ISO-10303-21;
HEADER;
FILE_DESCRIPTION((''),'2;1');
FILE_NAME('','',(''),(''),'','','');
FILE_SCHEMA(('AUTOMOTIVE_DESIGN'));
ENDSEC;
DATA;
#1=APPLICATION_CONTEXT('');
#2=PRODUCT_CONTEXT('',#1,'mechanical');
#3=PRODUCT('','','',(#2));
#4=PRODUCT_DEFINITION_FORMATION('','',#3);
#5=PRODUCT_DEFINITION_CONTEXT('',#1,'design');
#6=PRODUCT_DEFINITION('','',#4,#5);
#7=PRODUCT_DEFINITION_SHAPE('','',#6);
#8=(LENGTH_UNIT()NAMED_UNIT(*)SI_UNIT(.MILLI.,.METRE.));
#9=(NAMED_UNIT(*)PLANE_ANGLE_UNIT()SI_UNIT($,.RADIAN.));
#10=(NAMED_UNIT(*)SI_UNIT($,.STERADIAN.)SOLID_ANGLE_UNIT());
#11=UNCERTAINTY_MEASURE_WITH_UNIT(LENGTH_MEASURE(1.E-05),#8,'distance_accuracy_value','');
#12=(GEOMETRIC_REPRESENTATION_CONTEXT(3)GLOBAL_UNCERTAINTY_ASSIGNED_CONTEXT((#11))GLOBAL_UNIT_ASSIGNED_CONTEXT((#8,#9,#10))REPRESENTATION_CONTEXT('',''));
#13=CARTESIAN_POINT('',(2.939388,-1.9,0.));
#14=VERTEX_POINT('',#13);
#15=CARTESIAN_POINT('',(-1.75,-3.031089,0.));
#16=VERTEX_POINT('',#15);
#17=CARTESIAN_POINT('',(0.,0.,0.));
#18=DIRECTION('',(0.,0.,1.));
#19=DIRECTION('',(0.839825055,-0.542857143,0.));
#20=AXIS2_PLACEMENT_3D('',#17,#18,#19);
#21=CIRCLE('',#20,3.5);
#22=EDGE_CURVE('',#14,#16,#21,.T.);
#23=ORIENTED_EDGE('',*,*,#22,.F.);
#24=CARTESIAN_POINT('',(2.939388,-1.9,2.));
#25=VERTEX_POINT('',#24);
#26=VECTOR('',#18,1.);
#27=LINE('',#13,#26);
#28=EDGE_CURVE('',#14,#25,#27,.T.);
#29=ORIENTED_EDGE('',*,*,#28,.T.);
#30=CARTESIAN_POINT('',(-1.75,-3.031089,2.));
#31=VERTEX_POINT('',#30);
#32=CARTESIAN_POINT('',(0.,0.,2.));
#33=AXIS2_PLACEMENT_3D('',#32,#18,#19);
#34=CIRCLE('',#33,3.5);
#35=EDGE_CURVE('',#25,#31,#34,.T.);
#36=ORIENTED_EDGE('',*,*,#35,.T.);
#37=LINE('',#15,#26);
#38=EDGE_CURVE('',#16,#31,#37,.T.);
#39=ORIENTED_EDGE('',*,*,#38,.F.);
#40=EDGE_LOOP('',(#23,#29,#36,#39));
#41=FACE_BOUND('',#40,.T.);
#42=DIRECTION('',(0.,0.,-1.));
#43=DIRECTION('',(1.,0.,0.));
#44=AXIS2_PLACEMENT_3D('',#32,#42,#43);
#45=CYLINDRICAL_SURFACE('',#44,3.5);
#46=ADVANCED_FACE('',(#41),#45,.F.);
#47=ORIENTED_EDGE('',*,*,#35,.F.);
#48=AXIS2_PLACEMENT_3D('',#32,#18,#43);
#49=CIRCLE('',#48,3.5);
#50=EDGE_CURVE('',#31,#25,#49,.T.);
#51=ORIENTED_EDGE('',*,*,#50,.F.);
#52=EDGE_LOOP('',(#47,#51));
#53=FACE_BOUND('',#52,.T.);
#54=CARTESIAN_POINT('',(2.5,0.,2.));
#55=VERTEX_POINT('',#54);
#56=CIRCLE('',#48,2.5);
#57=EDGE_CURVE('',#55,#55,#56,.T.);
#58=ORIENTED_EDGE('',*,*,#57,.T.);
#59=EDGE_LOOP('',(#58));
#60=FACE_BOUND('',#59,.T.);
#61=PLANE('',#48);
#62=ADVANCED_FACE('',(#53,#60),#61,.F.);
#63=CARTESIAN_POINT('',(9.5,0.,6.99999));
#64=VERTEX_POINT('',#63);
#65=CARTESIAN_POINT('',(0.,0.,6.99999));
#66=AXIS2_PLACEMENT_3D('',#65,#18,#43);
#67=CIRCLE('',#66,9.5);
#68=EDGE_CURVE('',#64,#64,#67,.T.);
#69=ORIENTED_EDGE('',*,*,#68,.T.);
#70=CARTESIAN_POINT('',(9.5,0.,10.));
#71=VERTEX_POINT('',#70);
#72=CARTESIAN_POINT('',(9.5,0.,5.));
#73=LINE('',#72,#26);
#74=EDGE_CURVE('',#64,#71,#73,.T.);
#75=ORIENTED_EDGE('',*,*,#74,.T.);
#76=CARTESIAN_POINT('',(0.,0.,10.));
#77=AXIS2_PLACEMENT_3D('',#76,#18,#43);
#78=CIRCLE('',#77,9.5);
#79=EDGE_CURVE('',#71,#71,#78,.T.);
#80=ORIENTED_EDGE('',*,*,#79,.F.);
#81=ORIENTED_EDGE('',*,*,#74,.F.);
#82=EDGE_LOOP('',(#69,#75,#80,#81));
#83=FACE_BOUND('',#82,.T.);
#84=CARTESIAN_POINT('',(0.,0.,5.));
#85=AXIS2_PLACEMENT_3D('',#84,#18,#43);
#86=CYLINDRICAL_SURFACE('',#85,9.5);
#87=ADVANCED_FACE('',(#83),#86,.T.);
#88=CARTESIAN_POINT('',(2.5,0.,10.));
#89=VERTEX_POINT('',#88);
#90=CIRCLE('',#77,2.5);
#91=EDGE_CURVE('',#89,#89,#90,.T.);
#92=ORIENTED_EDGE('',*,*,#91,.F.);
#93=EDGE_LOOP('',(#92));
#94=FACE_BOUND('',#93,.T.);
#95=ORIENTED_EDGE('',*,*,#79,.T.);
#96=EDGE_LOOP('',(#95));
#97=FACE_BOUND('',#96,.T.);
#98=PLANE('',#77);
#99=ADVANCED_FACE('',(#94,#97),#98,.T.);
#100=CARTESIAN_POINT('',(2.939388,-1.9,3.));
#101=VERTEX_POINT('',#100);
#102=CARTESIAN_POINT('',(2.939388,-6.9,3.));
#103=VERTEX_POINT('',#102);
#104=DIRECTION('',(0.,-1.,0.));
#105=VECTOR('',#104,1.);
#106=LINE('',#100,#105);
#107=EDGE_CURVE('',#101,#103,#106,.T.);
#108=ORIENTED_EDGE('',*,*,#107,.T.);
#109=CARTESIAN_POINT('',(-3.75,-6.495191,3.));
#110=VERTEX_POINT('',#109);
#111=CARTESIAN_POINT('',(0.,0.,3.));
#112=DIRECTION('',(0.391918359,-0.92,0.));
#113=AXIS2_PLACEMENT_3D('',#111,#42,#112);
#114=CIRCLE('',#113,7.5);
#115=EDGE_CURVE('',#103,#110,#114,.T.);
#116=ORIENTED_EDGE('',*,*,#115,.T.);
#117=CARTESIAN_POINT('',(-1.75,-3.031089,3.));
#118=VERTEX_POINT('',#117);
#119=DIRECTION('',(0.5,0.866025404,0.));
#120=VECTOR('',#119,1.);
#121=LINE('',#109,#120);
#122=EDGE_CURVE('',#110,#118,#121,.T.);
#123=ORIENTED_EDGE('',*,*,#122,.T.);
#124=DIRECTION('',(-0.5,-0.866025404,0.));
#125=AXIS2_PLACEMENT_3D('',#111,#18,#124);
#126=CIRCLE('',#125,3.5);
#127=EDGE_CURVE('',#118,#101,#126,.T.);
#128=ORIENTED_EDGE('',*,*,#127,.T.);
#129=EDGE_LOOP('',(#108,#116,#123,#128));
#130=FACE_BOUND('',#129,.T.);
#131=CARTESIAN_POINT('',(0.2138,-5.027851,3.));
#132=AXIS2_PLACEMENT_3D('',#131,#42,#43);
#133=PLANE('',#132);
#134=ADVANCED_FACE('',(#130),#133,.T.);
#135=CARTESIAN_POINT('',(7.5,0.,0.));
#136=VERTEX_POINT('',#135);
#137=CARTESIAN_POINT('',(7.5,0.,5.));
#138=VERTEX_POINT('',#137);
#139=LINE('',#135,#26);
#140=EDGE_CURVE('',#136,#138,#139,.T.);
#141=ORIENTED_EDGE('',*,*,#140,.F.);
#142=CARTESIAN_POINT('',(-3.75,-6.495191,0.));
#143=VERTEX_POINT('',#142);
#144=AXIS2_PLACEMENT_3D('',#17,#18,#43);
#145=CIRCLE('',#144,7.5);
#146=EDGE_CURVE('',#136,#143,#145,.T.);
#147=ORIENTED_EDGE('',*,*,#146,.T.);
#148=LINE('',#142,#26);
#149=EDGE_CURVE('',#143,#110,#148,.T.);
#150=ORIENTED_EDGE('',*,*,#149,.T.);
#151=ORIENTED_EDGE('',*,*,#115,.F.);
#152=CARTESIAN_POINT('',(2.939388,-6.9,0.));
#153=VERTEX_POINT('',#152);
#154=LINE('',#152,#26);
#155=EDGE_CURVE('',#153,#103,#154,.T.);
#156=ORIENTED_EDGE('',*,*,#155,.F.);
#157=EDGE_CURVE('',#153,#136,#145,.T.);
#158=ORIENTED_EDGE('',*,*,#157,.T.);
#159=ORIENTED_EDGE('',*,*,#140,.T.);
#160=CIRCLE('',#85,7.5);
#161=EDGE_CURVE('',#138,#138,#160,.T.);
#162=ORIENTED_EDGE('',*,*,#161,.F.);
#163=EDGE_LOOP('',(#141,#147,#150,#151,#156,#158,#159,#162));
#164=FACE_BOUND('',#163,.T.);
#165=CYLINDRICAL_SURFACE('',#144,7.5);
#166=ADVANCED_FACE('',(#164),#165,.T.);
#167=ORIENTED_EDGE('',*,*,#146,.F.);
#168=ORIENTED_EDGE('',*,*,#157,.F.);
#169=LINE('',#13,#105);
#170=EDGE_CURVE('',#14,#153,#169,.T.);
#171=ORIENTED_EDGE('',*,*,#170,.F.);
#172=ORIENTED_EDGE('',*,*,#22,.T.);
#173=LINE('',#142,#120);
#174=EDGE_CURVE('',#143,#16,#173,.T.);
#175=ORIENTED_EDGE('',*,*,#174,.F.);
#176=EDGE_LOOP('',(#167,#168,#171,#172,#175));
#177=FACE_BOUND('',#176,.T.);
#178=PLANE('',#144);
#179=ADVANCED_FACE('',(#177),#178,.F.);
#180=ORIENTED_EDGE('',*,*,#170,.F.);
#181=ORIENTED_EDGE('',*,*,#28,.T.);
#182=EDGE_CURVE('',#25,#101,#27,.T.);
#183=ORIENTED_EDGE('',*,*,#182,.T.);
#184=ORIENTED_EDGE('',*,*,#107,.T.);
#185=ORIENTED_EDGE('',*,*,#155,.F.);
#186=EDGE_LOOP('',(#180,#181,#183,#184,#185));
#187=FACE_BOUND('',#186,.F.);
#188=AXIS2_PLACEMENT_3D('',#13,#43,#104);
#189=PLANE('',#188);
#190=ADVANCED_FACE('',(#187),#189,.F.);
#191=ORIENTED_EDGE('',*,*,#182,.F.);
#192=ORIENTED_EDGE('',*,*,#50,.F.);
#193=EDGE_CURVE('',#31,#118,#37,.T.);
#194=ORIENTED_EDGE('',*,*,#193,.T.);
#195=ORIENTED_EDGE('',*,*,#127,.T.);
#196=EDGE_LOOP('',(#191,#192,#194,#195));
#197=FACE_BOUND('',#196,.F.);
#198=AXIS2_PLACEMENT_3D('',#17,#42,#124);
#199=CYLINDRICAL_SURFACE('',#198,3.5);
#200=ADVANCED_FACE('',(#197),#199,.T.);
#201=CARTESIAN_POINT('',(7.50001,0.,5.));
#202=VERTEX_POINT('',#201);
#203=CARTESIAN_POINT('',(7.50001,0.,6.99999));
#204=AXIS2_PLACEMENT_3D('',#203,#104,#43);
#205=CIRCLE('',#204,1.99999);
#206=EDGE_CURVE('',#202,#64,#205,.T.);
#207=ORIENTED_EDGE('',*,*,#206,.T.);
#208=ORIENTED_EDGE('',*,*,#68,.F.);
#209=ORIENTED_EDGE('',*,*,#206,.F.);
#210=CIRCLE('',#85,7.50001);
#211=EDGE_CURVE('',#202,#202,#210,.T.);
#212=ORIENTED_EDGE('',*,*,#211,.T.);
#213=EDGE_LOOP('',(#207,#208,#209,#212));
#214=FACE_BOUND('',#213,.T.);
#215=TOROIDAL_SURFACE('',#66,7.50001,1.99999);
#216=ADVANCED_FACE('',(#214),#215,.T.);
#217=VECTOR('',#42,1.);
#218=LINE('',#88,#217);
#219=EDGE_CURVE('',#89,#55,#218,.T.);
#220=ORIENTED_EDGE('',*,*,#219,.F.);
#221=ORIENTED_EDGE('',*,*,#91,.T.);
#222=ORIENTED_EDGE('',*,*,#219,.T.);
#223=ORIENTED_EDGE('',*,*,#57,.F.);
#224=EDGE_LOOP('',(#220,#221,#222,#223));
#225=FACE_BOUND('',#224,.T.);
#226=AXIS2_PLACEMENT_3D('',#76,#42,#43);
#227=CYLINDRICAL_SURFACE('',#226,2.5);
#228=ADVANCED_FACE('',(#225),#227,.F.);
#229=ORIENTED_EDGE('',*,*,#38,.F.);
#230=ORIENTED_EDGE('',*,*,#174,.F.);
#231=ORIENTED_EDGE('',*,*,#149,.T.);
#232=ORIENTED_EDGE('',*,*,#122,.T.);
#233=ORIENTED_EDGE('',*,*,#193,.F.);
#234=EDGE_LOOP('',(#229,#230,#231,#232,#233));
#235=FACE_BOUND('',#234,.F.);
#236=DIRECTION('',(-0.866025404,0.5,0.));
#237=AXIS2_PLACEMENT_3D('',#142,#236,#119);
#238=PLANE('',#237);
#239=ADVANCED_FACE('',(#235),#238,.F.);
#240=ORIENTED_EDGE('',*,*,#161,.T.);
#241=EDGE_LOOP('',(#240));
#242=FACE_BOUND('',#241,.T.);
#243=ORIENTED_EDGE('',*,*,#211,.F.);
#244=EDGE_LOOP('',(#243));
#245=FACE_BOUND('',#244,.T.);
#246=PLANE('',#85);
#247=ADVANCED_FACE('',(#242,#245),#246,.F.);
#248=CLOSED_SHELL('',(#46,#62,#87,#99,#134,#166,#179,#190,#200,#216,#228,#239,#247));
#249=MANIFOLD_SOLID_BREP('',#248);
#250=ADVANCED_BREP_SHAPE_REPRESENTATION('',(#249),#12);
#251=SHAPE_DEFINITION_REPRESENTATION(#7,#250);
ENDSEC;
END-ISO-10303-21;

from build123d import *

# Parameters (mm, degrees)
F2_R     = 1.99999
F4_DEPTH = 3


# Not quite as in the source:
# - a fillet or chamfer is up to 0.001 mm smaller than in the source, because OpenCascade refuses the exact size
# - a feature names something its author has since deleted; it is built from what else it names


with BuildPart() as f1:
    # F0 (on Front) → F1 (revolve)
    with BuildSketch(Plane.XZ):
        Polygon((2.5, 2), (3.5, 2), (3.5, 0), (7.5, 0), (7.5, 5), (9.5, 5), (9.5, 10), (2.5, 10), align=None)
    revolve(axis=Axis((0, 0, 8.8058942929), (0, 0, 1)))

    # F2 (radius 2 in the source; OpenCascade refuses exactly that, so slightly less here)
    f2_edges = [f1.edges().sort_by_distance(p)[0] for p in [
        (-9.5, 0, 5),
    ]]
    fillet(f2_edges, radius=F2_R)

    # F3 (on face) → F4 (cut)
    with BuildSketch(Plane(origin=(0, 0, 0), x_dir=(1, 0, 0), z_dir=(0, 0, -1))):
        with BuildLine():
            ThreePointArc((-1.75, 3.0310889132), (0.8206712512, 3.402425414), (2.9393876913, 1.9))
            Line((2.9393876913, 1.9), (2.9393876913, 6.9))
            ThreePointArc((2.9393876913, 6.9), (-0.4530350492, 7.486304779), (-3.75, 6.4951905284))
            Line((-3.75, 6.4951905284), (-1.75, 3.0310889132))
        make_face()
    extrude(amount=-F4_DEPTH, mode=Mode.SUBTRACT)


solid = f1.part
